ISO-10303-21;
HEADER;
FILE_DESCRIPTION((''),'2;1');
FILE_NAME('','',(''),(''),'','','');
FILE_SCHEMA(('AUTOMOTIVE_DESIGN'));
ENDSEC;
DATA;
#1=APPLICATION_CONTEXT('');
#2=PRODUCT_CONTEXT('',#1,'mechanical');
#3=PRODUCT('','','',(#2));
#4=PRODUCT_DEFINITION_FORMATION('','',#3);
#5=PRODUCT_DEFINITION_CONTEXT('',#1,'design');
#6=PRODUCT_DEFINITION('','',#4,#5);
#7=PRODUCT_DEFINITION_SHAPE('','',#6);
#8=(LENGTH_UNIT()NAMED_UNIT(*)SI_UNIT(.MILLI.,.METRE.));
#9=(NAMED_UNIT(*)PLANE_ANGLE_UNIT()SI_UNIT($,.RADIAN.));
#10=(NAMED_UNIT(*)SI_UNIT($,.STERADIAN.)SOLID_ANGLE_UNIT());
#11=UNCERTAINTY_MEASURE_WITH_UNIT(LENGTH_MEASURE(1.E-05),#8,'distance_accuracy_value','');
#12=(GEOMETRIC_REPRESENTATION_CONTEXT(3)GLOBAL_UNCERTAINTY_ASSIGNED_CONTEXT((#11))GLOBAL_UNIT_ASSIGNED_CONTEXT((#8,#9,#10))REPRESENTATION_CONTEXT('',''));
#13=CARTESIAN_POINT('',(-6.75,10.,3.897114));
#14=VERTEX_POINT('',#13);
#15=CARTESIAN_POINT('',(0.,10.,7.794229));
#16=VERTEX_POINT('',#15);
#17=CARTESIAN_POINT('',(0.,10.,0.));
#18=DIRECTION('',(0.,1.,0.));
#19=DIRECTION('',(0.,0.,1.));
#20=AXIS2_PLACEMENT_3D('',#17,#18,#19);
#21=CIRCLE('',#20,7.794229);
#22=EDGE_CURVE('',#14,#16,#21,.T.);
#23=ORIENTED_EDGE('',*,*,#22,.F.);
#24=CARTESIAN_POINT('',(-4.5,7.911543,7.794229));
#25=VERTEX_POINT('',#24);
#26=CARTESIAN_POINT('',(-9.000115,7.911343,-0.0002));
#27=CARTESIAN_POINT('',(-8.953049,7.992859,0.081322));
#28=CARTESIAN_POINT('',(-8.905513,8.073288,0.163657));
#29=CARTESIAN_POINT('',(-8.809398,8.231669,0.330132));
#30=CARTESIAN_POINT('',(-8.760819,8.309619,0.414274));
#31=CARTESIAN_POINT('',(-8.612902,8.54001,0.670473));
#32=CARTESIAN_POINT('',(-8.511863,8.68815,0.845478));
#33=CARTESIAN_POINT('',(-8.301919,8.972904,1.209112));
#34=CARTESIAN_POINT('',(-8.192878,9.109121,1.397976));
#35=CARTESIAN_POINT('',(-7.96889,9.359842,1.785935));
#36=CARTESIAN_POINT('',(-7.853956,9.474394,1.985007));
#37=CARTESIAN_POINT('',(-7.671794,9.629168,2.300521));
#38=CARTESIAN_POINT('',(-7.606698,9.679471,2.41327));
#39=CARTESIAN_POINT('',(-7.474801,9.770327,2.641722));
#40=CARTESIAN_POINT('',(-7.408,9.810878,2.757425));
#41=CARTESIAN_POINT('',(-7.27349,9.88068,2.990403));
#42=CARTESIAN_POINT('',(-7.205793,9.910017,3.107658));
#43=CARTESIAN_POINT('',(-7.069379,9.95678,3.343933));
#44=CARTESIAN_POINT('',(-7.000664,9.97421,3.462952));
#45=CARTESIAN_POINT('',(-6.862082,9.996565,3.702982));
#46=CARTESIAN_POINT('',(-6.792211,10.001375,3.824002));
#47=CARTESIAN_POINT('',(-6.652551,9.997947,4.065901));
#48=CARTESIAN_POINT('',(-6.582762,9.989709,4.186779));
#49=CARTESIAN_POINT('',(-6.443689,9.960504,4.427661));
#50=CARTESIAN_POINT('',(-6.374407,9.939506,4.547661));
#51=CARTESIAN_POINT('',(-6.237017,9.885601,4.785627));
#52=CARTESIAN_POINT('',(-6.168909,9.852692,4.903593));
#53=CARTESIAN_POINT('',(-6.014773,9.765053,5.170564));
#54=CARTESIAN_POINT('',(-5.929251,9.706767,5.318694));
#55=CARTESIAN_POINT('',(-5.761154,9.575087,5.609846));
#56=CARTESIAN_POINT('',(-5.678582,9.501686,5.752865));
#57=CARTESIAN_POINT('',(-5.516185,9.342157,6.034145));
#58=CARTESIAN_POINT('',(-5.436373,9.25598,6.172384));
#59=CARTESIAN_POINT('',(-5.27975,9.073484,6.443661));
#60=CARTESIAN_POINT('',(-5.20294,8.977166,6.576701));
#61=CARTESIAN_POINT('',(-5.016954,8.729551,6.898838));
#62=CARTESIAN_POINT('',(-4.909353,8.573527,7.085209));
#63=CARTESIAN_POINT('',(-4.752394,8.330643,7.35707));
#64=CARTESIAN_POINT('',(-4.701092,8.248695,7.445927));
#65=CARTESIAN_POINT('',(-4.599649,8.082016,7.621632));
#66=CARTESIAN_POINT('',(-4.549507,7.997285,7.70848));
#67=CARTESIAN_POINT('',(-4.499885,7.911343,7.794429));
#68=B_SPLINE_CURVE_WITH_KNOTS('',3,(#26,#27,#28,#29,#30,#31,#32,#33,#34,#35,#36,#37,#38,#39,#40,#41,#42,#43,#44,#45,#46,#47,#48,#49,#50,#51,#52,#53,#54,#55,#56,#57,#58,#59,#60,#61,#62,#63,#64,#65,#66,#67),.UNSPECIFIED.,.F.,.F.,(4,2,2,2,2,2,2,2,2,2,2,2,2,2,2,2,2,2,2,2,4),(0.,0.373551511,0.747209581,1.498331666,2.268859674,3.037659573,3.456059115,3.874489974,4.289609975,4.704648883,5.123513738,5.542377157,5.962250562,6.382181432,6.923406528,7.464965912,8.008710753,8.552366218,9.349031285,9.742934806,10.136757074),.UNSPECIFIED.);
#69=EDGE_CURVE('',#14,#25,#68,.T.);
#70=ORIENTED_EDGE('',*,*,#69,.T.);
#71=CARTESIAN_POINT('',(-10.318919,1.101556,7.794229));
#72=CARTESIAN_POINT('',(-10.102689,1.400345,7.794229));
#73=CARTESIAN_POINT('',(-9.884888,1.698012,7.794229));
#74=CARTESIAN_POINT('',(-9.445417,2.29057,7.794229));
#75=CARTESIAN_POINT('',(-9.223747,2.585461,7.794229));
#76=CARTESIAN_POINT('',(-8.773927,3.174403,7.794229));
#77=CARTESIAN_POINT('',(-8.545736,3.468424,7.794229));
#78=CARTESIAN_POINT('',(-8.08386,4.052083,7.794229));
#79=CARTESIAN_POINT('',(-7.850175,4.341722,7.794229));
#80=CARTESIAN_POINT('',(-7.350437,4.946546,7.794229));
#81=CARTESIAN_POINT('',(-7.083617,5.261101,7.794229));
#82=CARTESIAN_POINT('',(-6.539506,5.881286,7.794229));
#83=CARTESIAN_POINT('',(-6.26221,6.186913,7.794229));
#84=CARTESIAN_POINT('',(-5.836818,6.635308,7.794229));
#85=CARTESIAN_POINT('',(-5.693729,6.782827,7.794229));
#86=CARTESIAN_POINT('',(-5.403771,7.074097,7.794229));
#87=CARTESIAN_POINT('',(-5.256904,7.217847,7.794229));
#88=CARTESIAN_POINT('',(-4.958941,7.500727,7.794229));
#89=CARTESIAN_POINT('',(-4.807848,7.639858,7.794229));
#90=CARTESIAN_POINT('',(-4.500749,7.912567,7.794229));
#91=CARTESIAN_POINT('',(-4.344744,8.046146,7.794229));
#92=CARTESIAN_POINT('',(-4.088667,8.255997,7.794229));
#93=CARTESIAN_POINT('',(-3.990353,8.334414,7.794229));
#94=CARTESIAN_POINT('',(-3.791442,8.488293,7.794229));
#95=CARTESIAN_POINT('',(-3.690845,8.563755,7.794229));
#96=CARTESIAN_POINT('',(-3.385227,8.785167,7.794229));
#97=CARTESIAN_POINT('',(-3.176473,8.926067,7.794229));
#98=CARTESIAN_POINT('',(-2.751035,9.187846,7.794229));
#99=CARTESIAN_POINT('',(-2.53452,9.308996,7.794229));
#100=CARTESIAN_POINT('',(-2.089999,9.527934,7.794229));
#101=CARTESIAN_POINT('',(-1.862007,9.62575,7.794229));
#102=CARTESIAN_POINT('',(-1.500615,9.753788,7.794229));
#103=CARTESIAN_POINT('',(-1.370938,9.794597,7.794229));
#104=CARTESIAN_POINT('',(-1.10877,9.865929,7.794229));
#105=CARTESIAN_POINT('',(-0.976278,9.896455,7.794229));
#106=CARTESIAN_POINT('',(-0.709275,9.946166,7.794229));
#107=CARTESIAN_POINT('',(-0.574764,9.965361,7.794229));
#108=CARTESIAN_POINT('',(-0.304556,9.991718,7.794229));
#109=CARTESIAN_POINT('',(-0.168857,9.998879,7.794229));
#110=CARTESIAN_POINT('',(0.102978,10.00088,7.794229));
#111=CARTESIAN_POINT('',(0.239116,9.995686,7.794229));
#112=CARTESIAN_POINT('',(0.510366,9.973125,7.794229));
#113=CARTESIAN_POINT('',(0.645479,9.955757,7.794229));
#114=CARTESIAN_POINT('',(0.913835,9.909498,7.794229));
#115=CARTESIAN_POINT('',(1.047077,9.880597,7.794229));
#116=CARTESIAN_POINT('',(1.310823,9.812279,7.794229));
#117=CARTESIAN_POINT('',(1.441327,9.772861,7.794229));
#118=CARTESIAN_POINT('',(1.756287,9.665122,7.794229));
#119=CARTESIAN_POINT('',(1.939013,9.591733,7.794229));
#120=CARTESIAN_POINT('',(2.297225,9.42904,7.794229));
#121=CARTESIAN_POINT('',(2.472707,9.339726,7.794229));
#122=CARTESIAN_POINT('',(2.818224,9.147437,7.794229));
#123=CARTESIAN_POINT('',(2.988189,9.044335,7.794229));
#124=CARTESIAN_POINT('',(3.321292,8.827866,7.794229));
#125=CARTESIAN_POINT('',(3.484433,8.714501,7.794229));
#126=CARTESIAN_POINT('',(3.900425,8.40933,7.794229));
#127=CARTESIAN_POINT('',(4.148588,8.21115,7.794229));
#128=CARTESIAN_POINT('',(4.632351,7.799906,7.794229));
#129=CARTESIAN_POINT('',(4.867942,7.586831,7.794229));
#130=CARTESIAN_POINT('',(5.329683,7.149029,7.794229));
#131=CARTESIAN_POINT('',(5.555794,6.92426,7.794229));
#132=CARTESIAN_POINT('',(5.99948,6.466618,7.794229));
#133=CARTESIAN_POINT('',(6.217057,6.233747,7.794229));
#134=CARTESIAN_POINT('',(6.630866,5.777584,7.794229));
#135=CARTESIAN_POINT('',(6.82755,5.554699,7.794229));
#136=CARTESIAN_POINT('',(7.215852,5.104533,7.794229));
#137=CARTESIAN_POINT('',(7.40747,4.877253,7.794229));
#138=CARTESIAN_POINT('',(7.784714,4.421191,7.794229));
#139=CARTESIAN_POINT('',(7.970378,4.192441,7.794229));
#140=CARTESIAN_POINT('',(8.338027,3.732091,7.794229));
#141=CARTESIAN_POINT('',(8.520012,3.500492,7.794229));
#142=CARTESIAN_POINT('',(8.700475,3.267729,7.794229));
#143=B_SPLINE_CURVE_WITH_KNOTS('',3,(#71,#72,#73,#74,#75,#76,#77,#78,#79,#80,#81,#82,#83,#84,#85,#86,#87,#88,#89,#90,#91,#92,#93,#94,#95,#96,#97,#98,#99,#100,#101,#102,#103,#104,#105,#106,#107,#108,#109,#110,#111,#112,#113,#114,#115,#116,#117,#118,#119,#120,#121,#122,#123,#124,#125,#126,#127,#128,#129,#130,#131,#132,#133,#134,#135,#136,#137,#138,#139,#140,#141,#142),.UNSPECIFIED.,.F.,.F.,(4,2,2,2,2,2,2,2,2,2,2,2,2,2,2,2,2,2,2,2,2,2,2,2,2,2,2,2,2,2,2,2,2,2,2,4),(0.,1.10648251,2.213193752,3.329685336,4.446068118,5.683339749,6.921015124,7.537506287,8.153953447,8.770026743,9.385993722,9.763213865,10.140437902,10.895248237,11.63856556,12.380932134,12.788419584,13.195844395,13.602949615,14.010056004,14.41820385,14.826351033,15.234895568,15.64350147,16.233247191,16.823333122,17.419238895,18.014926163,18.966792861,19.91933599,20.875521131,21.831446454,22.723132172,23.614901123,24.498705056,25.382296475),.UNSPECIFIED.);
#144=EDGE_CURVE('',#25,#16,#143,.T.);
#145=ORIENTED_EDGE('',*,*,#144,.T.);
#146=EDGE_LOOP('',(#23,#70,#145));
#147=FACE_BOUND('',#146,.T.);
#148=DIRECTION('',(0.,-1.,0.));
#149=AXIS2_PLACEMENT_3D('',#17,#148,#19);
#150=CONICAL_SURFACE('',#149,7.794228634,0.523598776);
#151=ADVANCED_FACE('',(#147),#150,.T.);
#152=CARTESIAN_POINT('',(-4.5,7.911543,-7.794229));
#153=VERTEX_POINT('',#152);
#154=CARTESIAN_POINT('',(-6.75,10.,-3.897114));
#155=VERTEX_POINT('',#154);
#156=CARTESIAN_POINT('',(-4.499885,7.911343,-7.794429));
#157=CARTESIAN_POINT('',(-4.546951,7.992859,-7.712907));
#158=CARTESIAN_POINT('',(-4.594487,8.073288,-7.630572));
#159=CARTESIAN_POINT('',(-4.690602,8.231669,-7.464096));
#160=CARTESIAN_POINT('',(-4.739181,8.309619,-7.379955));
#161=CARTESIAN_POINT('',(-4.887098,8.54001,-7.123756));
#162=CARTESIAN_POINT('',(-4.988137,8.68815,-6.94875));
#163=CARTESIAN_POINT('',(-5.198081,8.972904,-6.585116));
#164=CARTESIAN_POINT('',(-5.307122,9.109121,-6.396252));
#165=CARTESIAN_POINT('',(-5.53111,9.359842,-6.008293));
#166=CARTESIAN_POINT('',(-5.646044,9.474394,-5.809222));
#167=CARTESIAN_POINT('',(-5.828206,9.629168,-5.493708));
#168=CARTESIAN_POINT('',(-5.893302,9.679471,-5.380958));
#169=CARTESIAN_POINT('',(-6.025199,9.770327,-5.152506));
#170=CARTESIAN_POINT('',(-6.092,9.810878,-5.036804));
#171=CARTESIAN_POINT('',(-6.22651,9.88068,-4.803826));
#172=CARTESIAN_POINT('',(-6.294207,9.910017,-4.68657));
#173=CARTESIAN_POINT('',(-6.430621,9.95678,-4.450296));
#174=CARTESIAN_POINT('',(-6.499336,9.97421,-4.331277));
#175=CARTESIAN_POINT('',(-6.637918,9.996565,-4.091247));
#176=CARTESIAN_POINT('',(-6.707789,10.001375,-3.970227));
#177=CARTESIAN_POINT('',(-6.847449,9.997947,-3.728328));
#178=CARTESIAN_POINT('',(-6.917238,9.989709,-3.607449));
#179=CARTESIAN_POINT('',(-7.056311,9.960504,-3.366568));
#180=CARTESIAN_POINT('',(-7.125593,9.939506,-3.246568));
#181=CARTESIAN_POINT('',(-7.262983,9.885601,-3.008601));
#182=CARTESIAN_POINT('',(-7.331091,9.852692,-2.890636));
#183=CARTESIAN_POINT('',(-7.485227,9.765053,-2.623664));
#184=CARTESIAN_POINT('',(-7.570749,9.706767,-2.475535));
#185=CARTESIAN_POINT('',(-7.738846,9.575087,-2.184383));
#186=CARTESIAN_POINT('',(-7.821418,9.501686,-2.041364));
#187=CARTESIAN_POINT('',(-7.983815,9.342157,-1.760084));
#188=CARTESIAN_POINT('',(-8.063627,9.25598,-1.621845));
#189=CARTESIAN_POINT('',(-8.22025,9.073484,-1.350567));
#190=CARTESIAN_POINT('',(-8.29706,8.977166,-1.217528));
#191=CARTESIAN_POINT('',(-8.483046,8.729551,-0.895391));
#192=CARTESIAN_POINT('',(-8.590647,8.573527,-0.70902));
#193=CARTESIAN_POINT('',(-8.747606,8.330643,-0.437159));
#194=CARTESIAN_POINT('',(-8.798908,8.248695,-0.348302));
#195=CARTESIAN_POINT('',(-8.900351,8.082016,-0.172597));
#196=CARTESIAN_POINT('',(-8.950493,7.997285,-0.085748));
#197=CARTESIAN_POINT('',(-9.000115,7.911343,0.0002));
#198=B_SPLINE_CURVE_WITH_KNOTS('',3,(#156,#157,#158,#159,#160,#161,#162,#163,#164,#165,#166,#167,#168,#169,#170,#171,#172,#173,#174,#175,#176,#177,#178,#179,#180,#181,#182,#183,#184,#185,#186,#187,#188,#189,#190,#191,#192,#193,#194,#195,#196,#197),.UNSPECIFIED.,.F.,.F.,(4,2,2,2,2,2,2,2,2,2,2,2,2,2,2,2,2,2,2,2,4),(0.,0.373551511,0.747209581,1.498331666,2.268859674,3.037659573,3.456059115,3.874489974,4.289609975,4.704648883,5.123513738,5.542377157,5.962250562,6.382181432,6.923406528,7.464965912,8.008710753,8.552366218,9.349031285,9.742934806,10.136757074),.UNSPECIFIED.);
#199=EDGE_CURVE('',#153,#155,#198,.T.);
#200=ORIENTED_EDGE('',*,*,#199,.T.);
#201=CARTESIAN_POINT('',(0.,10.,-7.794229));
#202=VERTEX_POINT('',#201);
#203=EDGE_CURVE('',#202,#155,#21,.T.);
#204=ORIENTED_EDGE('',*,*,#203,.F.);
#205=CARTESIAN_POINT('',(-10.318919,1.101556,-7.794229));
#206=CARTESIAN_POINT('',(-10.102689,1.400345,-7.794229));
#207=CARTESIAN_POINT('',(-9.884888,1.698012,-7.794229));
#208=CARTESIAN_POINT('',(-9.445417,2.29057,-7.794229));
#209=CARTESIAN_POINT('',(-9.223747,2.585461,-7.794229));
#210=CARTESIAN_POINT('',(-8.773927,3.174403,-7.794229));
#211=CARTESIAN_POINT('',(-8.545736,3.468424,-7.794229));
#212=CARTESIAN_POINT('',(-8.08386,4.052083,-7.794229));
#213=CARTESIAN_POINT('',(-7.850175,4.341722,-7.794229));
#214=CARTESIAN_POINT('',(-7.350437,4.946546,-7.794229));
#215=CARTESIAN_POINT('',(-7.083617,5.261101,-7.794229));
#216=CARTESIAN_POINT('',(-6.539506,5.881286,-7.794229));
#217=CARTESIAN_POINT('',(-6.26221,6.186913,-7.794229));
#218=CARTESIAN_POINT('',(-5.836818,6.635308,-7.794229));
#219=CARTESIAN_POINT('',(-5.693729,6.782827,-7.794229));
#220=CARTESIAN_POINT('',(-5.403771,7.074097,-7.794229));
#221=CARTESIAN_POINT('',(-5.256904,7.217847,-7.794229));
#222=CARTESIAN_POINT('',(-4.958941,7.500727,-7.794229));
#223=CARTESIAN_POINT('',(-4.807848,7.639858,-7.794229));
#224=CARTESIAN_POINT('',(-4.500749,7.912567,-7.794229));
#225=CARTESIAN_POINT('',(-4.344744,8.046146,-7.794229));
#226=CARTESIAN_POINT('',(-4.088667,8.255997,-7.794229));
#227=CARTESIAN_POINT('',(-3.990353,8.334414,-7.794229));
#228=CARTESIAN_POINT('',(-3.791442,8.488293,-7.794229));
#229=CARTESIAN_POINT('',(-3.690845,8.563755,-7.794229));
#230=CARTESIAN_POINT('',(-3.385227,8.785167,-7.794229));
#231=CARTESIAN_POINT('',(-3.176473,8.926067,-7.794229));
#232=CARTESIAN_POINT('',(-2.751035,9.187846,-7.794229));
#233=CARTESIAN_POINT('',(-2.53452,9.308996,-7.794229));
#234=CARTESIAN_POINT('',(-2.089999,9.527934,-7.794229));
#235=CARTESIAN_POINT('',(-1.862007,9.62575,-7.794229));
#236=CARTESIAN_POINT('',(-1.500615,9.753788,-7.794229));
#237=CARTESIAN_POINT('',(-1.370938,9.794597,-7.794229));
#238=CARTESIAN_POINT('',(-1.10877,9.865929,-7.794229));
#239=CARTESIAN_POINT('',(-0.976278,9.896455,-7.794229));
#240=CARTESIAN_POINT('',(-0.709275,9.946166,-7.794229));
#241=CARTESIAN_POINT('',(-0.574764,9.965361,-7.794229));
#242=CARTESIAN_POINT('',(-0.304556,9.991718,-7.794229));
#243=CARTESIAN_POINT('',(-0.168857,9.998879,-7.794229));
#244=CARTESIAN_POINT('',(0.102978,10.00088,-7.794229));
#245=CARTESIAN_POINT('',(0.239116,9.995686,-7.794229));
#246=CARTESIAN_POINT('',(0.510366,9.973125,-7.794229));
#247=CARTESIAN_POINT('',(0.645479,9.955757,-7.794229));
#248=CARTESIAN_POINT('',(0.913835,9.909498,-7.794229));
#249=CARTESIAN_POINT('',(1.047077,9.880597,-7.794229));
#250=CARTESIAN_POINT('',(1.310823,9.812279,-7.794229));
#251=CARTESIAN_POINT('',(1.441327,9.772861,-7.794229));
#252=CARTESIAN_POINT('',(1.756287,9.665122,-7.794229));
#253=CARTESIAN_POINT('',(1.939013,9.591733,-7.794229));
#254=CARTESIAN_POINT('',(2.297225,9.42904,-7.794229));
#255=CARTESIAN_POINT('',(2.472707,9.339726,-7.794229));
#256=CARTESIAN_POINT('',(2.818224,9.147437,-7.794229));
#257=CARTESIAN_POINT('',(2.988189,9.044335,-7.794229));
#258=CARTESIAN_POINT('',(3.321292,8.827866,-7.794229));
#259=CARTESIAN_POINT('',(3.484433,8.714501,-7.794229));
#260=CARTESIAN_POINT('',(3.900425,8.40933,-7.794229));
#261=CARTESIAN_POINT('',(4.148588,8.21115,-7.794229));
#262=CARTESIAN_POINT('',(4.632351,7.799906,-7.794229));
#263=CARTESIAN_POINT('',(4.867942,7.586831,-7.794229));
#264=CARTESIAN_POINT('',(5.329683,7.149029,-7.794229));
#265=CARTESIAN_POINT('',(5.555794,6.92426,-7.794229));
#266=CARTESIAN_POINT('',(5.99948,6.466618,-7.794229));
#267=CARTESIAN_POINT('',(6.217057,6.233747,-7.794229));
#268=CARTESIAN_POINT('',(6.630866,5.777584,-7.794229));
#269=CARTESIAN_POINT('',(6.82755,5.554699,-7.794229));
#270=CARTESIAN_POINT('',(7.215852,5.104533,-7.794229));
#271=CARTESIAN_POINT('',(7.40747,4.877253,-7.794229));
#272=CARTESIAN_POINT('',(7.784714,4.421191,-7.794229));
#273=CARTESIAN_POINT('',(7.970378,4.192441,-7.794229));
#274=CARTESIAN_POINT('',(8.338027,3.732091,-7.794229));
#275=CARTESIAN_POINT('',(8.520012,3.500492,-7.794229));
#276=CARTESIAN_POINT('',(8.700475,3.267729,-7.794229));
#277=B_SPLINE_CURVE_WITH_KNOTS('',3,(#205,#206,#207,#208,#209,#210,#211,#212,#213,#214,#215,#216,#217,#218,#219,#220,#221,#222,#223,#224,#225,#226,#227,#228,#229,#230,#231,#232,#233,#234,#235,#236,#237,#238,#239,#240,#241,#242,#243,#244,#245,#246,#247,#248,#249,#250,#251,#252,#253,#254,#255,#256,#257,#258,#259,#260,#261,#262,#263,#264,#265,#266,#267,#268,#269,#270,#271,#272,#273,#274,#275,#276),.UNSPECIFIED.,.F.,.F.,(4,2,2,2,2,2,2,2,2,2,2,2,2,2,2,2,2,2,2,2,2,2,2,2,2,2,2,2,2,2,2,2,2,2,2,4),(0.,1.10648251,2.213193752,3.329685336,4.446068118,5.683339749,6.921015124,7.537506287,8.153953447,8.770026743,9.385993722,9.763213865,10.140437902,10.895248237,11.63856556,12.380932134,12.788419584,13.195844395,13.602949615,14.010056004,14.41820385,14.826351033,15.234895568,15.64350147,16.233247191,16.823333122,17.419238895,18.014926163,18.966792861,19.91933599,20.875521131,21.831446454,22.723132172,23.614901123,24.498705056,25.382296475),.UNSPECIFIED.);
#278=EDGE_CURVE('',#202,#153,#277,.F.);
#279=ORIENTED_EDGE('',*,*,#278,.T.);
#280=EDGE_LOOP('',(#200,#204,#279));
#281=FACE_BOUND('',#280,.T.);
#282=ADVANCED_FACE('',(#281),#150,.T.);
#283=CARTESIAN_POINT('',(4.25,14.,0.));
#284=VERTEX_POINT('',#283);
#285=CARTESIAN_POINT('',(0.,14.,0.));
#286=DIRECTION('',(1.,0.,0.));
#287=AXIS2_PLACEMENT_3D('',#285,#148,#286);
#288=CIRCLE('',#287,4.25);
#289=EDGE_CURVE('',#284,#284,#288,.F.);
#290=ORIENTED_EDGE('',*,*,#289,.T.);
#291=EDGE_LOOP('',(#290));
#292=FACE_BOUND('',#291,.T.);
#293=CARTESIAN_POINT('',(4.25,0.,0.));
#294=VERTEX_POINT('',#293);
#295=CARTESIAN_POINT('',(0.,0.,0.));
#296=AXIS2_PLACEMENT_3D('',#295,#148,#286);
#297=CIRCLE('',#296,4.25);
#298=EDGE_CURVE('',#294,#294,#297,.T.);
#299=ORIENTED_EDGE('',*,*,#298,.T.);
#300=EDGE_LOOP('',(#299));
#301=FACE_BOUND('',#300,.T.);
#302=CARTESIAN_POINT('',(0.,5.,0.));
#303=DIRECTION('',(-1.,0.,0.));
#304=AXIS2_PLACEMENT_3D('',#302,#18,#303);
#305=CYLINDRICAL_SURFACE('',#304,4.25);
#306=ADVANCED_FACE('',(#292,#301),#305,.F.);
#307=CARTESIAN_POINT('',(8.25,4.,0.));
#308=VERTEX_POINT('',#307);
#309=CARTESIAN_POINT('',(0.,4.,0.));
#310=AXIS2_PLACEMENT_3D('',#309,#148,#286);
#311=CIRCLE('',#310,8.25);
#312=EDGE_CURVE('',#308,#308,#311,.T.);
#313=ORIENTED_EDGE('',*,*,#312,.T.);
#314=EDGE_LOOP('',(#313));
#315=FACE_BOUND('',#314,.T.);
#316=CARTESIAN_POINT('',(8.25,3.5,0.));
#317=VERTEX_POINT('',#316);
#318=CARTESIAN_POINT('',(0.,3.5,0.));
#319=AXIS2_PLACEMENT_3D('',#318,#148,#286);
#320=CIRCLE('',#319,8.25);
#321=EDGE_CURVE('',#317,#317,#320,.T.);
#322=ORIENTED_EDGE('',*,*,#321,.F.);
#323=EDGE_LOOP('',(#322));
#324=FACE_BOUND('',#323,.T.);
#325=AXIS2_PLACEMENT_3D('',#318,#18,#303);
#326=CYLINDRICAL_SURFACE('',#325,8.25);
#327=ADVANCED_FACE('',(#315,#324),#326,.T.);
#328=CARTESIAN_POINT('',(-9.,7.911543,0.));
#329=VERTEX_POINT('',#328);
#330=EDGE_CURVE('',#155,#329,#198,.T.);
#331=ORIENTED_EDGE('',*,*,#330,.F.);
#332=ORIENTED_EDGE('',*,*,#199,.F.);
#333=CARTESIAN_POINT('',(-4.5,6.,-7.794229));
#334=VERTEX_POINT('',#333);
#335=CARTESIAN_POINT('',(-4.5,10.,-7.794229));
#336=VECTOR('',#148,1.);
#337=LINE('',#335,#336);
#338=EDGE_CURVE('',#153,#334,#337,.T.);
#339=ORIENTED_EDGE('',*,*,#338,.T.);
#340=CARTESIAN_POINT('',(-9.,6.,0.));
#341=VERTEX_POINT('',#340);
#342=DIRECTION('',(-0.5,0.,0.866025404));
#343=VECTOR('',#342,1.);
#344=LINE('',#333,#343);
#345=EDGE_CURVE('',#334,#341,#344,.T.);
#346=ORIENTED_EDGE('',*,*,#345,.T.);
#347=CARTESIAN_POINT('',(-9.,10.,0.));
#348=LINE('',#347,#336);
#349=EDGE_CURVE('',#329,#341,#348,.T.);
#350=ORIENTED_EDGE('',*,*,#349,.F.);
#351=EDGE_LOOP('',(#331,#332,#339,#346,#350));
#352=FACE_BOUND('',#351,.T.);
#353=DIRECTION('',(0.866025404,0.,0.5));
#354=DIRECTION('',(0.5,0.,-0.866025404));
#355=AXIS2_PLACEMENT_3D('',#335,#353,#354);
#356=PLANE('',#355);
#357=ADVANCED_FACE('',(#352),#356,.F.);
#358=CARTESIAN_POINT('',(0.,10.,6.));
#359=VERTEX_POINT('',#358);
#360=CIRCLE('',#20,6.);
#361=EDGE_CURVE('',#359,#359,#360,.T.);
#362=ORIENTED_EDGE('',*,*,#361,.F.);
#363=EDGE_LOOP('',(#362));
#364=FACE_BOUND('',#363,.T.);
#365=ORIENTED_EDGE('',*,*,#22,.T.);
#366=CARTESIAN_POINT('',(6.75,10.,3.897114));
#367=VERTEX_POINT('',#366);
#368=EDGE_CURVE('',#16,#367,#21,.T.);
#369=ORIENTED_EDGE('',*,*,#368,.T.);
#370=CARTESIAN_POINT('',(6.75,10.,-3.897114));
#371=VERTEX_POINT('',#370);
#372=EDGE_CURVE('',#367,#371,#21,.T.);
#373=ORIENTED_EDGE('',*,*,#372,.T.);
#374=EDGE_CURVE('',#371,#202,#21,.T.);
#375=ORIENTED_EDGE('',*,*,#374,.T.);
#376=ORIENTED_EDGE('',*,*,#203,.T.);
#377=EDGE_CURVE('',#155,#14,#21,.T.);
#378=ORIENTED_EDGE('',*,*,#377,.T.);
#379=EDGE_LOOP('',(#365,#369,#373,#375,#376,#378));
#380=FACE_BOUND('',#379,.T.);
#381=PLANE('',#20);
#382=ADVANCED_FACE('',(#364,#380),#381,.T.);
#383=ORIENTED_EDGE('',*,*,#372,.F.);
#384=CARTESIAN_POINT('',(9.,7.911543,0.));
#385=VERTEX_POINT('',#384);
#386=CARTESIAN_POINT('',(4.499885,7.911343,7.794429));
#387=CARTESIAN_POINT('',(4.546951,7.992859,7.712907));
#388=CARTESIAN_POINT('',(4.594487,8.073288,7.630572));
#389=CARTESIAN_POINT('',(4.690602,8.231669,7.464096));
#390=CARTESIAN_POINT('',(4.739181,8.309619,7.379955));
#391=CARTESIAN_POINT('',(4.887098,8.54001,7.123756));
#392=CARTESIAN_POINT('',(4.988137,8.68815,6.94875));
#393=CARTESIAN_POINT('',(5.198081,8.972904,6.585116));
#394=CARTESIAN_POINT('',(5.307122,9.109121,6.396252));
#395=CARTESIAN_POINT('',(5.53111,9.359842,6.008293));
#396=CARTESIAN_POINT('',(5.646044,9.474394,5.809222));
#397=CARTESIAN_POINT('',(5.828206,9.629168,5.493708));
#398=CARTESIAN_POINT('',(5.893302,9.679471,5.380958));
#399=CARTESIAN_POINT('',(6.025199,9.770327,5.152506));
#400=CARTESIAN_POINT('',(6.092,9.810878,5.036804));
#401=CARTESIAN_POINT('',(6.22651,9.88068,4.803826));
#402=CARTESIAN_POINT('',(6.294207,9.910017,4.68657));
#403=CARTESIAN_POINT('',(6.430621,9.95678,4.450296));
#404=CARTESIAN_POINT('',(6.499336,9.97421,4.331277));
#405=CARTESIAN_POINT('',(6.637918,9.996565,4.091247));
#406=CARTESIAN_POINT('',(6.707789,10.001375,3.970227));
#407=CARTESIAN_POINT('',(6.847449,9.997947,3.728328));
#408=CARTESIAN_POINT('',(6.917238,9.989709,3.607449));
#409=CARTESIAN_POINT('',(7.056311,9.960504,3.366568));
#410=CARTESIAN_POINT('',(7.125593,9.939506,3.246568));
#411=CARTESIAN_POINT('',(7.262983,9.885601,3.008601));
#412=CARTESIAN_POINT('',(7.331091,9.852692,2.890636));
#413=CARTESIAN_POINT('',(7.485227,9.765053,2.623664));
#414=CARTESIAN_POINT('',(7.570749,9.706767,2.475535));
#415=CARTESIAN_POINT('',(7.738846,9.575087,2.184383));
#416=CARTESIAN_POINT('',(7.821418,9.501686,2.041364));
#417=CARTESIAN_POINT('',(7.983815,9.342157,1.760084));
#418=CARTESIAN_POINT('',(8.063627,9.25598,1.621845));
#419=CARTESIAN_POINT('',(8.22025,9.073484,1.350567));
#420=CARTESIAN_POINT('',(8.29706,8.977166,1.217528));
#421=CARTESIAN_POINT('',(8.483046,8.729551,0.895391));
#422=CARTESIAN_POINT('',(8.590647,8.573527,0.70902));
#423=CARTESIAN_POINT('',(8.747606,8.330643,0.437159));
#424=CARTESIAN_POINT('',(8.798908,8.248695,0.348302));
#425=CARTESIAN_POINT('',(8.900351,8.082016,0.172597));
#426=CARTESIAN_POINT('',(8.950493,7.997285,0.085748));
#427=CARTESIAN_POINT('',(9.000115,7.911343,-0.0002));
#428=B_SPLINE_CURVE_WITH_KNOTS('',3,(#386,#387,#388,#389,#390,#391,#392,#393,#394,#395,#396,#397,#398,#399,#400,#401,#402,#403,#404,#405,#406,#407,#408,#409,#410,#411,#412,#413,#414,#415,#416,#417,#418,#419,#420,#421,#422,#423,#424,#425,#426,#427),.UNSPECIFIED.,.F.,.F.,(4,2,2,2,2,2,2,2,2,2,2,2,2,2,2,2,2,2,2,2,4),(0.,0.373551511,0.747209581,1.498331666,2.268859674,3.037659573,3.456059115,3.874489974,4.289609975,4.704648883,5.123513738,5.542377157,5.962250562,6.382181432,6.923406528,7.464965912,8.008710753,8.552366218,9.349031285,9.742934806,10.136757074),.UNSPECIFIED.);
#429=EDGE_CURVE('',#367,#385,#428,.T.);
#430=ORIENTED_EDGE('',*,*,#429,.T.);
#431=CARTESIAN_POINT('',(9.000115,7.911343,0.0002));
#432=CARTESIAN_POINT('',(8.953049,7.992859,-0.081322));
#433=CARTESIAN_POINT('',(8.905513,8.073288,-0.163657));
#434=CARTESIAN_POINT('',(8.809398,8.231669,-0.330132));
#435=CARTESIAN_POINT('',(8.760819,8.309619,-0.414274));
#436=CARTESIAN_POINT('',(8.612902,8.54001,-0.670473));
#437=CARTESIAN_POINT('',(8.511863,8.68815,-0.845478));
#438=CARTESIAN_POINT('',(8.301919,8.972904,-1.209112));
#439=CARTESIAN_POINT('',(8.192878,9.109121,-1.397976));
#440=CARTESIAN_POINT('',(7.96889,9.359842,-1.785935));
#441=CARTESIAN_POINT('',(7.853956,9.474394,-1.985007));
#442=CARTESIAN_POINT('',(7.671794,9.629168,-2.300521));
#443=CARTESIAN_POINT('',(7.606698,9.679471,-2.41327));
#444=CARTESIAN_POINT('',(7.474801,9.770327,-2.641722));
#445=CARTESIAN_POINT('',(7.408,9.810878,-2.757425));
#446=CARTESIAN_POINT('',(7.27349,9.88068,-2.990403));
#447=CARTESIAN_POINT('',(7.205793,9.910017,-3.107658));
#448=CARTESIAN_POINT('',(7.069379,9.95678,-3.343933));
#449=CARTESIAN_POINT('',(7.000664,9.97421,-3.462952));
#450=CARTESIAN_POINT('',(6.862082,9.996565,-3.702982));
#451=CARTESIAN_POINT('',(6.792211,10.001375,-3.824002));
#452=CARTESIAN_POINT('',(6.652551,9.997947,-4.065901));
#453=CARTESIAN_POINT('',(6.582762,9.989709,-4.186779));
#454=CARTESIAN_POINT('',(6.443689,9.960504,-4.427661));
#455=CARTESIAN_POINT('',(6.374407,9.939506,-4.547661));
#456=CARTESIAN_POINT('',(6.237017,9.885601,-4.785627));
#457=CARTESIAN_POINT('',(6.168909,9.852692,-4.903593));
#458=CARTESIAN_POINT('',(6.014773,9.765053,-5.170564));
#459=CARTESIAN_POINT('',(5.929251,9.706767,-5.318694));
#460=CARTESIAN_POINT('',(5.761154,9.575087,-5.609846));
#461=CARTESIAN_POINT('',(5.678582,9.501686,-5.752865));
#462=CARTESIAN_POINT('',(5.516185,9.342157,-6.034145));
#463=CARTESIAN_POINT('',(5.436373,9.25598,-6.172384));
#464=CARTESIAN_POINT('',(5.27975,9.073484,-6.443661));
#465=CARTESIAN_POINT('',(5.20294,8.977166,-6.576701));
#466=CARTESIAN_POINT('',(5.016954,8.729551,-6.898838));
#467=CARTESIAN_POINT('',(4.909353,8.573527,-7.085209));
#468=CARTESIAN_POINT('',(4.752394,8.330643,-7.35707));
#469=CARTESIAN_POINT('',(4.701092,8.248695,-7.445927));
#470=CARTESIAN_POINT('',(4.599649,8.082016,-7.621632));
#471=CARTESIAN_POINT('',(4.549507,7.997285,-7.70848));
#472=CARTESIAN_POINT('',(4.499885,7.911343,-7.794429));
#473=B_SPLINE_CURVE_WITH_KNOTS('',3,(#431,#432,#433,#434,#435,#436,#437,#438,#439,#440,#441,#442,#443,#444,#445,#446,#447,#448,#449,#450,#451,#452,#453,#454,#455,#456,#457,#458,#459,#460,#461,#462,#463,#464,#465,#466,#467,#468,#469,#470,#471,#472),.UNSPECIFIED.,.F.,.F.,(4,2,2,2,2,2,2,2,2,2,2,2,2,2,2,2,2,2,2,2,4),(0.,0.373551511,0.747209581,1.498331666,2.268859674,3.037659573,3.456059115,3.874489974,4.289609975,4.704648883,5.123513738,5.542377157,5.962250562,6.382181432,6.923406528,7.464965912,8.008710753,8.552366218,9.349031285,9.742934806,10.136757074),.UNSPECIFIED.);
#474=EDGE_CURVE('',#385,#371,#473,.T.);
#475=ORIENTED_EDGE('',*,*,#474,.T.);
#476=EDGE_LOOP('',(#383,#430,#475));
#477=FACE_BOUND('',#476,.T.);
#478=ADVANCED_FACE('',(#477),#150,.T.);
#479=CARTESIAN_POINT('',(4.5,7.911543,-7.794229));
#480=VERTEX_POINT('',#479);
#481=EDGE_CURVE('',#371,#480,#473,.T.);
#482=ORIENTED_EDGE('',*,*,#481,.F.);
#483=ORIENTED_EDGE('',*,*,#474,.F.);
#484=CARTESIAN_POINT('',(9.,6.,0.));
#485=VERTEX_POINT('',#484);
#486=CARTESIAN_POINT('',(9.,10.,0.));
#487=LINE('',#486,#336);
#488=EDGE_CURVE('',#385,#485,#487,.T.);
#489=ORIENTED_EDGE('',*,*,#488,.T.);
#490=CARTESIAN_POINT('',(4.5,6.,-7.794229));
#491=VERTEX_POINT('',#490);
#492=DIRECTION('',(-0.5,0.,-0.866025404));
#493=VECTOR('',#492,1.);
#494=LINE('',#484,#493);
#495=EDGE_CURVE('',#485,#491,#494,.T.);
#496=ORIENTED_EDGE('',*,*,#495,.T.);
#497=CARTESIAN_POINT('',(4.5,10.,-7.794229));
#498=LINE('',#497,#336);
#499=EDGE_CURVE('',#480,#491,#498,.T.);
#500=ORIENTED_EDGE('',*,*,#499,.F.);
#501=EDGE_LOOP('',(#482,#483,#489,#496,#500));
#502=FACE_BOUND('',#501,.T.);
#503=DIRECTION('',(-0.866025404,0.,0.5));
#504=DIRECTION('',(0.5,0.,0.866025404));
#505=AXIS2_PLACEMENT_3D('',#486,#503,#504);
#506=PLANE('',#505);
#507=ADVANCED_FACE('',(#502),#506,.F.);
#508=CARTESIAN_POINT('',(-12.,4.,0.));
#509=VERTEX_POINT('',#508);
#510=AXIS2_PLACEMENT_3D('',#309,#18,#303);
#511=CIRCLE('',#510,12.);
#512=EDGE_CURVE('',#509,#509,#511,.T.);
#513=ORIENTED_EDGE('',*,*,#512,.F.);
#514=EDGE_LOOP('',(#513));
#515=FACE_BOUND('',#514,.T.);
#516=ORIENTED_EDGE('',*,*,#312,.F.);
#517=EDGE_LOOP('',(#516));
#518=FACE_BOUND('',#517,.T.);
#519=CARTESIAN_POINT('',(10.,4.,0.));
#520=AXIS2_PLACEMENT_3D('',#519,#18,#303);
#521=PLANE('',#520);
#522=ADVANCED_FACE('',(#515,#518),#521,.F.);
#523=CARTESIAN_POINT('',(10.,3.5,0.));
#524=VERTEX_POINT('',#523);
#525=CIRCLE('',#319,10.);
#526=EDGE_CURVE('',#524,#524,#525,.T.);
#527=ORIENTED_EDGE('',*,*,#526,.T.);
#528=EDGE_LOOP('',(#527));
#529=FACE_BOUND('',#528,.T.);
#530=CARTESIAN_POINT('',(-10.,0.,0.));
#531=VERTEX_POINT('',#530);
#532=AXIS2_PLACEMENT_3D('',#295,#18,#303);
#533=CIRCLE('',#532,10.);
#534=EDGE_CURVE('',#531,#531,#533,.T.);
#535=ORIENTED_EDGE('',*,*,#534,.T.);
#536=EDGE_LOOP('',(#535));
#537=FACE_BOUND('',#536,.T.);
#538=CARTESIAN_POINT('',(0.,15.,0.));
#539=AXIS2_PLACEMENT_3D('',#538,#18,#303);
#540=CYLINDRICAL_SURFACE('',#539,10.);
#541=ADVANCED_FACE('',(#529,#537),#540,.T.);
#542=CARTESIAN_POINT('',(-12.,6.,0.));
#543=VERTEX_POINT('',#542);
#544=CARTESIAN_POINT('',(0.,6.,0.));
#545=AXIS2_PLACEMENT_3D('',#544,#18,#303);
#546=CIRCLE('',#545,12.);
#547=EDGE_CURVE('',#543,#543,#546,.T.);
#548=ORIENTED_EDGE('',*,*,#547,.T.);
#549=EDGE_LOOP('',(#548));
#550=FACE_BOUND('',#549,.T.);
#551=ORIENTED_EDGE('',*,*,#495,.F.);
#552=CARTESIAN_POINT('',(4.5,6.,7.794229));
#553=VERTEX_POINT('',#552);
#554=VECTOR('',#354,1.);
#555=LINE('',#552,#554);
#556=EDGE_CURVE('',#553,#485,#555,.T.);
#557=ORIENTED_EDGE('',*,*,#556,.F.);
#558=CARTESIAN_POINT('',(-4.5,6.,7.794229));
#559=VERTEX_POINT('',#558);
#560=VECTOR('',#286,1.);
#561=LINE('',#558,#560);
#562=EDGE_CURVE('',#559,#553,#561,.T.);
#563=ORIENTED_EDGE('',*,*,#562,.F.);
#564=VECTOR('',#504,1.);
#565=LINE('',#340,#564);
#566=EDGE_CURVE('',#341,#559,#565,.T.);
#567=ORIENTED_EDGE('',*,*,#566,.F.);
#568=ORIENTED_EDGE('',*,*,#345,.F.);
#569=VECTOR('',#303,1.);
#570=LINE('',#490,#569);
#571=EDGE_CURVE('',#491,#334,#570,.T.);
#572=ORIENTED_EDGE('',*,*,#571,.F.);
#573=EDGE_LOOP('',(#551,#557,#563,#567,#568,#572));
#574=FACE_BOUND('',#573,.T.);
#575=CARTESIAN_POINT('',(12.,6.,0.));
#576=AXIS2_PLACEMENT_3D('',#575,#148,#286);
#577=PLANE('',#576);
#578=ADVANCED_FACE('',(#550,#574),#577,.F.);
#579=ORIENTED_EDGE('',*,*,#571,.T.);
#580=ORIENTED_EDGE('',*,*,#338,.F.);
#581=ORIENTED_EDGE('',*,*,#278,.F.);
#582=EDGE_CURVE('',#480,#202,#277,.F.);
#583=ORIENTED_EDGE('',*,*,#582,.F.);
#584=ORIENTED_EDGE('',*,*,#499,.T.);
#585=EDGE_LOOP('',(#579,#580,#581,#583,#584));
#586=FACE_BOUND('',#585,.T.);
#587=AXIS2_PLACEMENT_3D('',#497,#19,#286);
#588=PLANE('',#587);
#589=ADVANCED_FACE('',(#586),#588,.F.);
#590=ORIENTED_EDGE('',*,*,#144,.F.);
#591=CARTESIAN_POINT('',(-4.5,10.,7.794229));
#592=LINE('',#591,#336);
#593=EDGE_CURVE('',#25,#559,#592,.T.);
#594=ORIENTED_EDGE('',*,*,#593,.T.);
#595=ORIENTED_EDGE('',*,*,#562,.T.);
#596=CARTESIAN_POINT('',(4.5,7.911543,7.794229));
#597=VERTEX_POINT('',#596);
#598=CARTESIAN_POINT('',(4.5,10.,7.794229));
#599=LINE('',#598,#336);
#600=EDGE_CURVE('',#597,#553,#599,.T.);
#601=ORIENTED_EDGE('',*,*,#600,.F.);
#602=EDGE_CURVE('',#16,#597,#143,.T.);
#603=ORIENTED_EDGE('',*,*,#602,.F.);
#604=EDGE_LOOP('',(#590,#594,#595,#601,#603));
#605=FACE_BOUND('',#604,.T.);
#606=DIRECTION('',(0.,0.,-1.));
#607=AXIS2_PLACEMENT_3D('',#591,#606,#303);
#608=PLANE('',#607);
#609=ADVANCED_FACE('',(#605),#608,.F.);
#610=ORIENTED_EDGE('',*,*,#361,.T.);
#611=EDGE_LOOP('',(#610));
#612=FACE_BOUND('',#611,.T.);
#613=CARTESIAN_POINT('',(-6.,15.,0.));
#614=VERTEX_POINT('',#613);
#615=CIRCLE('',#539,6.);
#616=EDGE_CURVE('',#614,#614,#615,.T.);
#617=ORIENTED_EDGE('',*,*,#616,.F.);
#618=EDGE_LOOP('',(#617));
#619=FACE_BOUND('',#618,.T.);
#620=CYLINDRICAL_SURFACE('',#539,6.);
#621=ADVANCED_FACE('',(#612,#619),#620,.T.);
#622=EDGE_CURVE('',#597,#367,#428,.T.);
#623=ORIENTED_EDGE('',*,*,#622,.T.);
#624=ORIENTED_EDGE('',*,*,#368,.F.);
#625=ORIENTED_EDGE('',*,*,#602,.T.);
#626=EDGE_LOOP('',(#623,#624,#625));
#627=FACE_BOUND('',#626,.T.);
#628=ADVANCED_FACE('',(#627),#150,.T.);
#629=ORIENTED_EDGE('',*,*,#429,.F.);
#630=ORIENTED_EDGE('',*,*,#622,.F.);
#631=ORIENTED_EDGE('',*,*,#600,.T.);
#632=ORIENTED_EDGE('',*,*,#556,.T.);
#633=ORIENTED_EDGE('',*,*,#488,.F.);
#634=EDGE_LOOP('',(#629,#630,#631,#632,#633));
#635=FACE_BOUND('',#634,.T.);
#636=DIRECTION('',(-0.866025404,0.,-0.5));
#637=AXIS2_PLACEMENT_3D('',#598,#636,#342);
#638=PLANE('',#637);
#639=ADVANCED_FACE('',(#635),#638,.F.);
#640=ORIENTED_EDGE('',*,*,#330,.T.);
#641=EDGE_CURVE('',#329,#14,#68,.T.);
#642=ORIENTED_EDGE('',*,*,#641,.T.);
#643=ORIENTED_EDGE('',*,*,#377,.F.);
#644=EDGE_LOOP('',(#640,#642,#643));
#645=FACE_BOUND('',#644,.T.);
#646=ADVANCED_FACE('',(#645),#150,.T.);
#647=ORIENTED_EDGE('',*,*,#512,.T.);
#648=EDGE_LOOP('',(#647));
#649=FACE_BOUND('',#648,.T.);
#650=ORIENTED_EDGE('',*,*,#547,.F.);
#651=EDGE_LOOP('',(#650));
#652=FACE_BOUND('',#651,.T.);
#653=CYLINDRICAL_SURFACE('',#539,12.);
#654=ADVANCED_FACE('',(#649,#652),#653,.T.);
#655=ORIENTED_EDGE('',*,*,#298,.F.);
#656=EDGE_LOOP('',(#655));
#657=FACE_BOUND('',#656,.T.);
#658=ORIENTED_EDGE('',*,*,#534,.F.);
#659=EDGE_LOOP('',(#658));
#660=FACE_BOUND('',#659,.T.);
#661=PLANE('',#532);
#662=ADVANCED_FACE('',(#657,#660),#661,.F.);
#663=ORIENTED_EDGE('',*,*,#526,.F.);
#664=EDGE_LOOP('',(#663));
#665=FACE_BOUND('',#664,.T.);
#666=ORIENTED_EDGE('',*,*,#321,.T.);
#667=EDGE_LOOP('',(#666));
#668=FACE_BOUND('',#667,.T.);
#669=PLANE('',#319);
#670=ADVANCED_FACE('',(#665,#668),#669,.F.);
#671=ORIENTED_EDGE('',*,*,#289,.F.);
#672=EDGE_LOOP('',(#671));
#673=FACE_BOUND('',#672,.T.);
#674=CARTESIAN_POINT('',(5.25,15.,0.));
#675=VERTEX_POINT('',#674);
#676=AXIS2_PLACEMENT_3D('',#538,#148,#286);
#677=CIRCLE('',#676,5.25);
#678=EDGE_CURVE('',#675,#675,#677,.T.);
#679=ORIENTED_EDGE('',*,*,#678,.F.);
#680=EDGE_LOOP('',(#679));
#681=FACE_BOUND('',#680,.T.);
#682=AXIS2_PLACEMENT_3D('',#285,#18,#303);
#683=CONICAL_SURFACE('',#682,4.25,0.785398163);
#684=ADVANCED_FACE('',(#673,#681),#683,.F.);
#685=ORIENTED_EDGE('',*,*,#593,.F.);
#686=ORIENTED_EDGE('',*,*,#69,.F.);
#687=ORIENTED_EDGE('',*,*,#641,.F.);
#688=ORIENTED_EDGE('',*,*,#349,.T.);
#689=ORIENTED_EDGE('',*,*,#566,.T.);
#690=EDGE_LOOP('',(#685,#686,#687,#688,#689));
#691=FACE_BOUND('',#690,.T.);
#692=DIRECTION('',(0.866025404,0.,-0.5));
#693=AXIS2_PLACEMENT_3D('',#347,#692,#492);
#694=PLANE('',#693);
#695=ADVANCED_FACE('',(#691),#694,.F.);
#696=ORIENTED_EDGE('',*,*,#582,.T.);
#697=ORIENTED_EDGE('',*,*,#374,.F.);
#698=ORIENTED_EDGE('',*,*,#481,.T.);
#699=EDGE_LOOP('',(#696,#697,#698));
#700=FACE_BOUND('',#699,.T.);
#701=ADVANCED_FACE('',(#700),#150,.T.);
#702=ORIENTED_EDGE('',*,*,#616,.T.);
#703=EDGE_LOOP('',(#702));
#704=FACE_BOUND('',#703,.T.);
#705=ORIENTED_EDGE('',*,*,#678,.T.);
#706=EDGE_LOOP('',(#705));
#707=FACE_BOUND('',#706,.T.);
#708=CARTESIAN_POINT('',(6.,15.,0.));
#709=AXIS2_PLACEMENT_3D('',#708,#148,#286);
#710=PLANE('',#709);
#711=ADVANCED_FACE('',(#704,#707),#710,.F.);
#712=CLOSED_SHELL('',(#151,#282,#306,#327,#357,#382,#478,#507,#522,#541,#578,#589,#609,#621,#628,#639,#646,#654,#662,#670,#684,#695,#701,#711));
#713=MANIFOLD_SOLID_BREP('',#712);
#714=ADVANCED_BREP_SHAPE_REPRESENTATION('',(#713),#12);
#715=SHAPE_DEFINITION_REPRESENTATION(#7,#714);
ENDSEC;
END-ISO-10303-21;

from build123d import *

# Parameters (mm, degrees)
BOSS_EXTRUDE1_DEPTH = 4
SKETCH3_R           = 4.25
CUT_EXTRUDE1_DEPTH  = 10
CUT_EXTRUDE2_START  = -10
SKETCH4_R           = 4.25
CUT_EXTRUDE2_DEPTH  = 10
SKETCH5_OUTSIDE_W   = 33.422
SKETCH5_OUTSIDE_H   = 33.422
SKETCH5_OUTSIDE_R   = 8.25
CUT_EXTRUDE3_DEPTH  = 0.5
CHAMFER1_SIZE       = 1


# Read off the part's stored shape, not the designer's step: Cut-Extrude4
with BuildPart() as part:
    # Sketch1 → Revolve1 (revolve)
    with BuildSketch(Plane.XY, mode=Mode.PRIVATE) as revolve1_sk:
        Polygon((0, 0), (10, 0), (10, 4), (12, 4), (12, 6), (6, 6), (6, 15), (0, 15), align=None)
    revolve(revolve1_sk.sketch.rotate(Axis((0, 15, 0), (0, -1, 0)), 180), axis=Axis((0, 15, 0), (0, -1, 0)))

    # Sketch2 → Boss-Extrude1 (add)
    with BuildSketch(Plane(origin=(0, 6, 0), x_dir=(1, 0, 0), z_dir=(0, 1, 0))):
        Polygon((9, 0), (4.5, 7.794228634), (-4.5, 7.794228634), (-9, 0), (-4.5, -7.794228634), (4.5, -7.794228634), align=None)
    extrude(amount=BOSS_EXTRUDE1_DEPTH)

    # Sketch3 → Cut-Extrude1 (cut)
    with BuildSketch(Plane(origin=(0, 15, 0), x_dir=(1, 0, 0), z_dir=(0, 1, 0))):
        with Locations(Location((0, 0, 0), (0, 0, 180))):
            Circle(SKETCH3_R)
    extrude(amount=-CUT_EXTRUDE1_DEPTH, mode=Mode.SUBTRACT)

    # Sketch4 → Cut-Extrude2 (cut)
    with BuildSketch(Plane.XZ.offset(CUT_EXTRUDE2_START)):
        with Locations(Location((0, 0, 0), (0, 0, 180))):
            Circle(SKETCH4_R)
    extrude(amount=CUT_EXTRUDE2_DEPTH, mode=Mode.SUBTRACT)

    # Sketch5 outside → Cut-Extrude3 (cut)
    with BuildSketch(Plane.XZ.offset(-4)):
        Rectangle(SKETCH5_OUTSIDE_W, SKETCH5_OUTSIDE_H)
        Circle(SKETCH5_OUTSIDE_R, mode=Mode.SUBTRACT)
    extrude(amount=CUT_EXTRUDE3_DEPTH, mode=Mode.SUBTRACT)

    # Cut-Extrude4 outline → Cut-Extrude4 (revolve, cut)
    with BuildSketch(Plane.XY):
        Polygon((9.000000004, 10.000001017), (7.794228286, 10.000001017), (9.000000004, 7.911542725), align=None)
    revolve(axis=Axis((0, 0, 0), (0, 1, 0)), mode=Mode.SUBTRACT)

    # Chamfer1
    chamfer1_edges = [part.edges().sort_by_distance(p)[0] for p in [
        (4.25, 15, 0),
    ]]
    chamfer(chamfer1_edges, length=CHAMFER1_SIZE)


solid = part.part
